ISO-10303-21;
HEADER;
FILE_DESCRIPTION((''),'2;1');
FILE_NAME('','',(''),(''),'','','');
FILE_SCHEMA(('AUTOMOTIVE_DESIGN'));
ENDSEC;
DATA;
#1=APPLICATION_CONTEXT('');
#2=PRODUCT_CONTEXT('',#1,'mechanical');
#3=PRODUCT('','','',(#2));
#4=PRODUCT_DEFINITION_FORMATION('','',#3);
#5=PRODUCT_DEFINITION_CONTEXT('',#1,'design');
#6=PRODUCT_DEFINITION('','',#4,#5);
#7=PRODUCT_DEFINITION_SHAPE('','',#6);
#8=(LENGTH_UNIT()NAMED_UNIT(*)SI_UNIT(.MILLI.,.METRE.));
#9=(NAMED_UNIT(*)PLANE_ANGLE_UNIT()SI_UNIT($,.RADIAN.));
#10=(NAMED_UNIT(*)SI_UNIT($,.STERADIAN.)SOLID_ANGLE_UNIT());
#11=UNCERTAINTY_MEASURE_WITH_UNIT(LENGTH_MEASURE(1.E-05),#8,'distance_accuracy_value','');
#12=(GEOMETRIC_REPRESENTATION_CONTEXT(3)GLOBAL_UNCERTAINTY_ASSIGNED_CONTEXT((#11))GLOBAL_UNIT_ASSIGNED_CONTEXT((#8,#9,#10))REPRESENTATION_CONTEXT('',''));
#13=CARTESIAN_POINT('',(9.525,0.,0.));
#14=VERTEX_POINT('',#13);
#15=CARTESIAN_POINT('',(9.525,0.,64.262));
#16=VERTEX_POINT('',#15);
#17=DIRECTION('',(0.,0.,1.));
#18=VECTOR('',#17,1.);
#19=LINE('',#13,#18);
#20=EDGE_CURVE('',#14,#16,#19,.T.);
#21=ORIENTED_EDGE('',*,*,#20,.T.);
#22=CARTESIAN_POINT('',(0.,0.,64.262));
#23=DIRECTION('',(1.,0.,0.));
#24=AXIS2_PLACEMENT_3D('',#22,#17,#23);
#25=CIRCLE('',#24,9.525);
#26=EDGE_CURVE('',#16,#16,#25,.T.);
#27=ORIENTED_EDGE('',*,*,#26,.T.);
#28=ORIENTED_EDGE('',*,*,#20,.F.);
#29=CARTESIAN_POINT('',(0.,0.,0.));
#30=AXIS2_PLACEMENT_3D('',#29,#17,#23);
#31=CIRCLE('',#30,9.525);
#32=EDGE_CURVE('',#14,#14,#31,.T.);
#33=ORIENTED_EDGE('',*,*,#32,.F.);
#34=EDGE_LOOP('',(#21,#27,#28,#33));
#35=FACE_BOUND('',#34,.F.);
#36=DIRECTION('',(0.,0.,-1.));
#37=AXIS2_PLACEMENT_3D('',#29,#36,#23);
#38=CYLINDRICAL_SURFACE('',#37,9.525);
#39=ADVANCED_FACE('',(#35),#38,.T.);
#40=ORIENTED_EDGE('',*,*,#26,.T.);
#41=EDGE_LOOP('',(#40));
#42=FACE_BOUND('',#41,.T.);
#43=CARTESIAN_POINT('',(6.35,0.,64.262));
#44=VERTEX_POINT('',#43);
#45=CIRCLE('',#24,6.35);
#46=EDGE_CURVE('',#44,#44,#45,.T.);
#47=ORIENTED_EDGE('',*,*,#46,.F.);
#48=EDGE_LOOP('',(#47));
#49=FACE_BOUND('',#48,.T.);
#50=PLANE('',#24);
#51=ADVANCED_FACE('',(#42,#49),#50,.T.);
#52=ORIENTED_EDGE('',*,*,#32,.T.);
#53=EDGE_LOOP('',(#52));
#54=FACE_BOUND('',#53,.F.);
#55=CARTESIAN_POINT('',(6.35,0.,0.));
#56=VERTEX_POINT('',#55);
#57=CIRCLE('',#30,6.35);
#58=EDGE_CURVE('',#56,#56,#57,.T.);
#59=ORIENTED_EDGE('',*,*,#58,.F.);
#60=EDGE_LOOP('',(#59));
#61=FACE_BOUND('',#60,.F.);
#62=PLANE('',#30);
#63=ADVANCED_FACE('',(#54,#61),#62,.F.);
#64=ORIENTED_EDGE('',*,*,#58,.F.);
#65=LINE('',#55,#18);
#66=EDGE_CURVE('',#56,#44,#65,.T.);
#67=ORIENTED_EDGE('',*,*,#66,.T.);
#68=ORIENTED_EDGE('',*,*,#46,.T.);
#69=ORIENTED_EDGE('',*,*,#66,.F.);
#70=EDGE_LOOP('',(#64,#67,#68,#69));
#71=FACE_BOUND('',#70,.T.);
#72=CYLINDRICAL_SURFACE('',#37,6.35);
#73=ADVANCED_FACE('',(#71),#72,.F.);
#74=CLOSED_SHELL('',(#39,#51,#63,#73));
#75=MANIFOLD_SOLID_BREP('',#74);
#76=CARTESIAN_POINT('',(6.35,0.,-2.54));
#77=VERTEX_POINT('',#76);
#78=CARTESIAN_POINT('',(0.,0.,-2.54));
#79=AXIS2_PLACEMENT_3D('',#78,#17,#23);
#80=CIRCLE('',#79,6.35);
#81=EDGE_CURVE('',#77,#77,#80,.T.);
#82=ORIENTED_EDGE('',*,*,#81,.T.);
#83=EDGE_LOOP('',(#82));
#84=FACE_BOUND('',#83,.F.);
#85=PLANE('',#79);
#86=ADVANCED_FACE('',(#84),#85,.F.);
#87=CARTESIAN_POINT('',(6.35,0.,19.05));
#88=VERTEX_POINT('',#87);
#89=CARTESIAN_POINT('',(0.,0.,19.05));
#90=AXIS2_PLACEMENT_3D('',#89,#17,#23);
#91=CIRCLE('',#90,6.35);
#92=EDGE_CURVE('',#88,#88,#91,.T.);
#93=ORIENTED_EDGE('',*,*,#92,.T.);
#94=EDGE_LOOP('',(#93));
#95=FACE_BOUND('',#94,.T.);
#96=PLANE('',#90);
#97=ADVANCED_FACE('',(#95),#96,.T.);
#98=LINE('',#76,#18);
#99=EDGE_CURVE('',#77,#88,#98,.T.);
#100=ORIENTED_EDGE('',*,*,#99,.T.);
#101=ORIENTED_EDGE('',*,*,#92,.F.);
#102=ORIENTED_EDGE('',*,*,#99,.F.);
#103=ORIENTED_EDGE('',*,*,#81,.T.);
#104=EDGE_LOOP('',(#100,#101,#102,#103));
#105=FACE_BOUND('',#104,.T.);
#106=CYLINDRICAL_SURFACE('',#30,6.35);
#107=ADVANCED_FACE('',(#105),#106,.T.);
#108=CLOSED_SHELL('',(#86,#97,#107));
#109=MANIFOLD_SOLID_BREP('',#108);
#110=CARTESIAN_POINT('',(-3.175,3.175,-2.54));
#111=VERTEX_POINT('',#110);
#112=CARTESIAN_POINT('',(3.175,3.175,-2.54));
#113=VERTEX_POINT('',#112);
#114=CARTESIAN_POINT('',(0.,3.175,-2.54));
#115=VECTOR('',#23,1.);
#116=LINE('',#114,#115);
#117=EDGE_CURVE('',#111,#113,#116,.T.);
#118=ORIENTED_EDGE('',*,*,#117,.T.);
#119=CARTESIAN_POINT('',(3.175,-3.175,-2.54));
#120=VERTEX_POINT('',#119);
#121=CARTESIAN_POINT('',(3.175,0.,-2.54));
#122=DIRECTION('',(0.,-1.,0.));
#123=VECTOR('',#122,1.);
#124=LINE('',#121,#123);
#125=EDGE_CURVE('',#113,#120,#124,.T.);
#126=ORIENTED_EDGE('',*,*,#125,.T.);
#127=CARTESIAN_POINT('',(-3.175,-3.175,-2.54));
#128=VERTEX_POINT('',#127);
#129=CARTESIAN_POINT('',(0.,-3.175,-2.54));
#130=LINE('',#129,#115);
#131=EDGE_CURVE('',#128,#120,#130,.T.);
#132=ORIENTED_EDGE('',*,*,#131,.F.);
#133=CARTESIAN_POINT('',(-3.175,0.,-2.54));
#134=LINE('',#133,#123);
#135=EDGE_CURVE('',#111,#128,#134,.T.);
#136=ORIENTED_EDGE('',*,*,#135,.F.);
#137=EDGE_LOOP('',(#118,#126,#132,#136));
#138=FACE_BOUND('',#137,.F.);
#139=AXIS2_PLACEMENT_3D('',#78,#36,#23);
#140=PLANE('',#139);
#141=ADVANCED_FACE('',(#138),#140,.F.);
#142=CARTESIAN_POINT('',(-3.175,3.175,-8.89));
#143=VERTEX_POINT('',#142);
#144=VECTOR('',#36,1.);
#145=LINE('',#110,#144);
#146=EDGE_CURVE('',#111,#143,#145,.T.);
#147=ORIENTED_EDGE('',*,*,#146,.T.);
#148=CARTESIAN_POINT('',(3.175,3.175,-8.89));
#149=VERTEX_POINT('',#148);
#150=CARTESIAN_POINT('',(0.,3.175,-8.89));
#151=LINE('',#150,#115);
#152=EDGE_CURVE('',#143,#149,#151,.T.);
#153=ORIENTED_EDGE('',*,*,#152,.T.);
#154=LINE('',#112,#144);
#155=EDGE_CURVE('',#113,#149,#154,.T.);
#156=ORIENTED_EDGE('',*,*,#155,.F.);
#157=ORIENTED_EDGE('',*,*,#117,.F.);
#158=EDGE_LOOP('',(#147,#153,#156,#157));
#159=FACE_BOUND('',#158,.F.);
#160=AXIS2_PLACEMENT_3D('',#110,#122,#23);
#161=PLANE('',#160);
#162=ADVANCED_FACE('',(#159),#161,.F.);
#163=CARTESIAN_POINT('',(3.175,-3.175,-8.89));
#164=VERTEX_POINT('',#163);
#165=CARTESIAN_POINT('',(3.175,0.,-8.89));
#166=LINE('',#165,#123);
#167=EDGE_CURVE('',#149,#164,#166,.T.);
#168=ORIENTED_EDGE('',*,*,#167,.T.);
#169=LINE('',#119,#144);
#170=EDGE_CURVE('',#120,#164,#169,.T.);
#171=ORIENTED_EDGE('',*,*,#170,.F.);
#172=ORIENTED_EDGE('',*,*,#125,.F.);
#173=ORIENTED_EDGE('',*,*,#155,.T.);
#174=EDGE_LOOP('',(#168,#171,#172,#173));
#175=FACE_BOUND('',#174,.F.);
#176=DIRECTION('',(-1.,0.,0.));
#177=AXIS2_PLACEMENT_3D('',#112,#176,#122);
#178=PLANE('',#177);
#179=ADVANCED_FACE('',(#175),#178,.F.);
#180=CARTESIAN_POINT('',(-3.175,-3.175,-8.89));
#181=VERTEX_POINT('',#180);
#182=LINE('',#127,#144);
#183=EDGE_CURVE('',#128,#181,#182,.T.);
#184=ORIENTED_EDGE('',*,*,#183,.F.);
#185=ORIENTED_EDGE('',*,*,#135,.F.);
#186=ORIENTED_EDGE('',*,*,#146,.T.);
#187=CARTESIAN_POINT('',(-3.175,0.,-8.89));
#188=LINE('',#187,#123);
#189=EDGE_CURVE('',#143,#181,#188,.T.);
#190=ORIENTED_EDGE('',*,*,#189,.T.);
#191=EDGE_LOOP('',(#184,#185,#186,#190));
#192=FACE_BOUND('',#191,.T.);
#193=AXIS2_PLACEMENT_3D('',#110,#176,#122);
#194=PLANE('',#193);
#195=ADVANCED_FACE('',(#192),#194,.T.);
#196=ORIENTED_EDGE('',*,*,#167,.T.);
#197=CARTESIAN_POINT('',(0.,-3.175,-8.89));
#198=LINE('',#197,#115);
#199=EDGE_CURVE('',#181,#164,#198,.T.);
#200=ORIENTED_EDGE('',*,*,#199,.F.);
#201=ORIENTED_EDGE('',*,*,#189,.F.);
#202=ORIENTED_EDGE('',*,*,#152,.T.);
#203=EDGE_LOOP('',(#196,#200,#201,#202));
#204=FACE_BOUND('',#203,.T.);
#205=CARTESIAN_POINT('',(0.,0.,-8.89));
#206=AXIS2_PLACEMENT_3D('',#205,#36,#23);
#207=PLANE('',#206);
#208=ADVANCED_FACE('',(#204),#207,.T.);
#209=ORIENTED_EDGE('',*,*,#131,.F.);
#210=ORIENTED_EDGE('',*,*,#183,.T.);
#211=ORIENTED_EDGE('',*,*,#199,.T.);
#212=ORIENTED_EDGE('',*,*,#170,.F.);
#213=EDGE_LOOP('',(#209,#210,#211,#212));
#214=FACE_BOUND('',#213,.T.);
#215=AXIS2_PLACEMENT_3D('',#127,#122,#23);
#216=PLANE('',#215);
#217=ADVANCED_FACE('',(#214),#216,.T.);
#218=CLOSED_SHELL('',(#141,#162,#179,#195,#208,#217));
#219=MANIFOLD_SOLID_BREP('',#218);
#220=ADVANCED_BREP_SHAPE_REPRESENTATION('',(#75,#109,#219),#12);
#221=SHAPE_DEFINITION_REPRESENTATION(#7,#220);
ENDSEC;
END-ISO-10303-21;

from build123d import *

# Parameters (mm, degrees)
F0_R          = 9.525
F0_R_2        = 6.35
F1_DEPTH      = 64.262
F2_R          = 6.35
F3_DEPTH      = 63.5
F4_DEPTH      = 19.05
F4_DEPTH_BACK = 2.54
F5_W          = 6.35
F5_H          = 6.35
F6_DEPTH      = 6.35


with BuildPart() as f1:
    # F0 (on Top) → F1 (new body)
    with BuildSketch(Plane.XY):
        Circle(F0_R)
        Circle(F0_R_2, mode=Mode.SUBTRACT)
    extrude(amount=F1_DEPTH)

    # F2 (on face) → F3 (cut)
    with BuildSketch(Plane.XY.offset(64.262)):
        Circle(F2_R)
    extrude(amount=-F3_DEPTH, mode=Mode.SUBTRACT)


with BuildPart() as f4:
    # F0 (on Top) → F4 (new body, two sides)
    with BuildSketch(Plane.XY) as f4_sk:
        Circle(F0_R_2)
    extrude(amount=F4_DEPTH)
    extrude(f4_sk.sketch, amount=-F4_DEPTH_BACK)


with BuildPart() as f6:
    # F5 (on face) → F6 (new body)
    with BuildSketch(Plane(origin=(0, 0, -2.54), x_dir=(1, 0, 0), z_dir=(0, 0, -1))):
        Rectangle(F5_W, F5_H)
    extrude(amount=F6_DEPTH)


solid = Compound([f1.part, f4.part, f6.part])
